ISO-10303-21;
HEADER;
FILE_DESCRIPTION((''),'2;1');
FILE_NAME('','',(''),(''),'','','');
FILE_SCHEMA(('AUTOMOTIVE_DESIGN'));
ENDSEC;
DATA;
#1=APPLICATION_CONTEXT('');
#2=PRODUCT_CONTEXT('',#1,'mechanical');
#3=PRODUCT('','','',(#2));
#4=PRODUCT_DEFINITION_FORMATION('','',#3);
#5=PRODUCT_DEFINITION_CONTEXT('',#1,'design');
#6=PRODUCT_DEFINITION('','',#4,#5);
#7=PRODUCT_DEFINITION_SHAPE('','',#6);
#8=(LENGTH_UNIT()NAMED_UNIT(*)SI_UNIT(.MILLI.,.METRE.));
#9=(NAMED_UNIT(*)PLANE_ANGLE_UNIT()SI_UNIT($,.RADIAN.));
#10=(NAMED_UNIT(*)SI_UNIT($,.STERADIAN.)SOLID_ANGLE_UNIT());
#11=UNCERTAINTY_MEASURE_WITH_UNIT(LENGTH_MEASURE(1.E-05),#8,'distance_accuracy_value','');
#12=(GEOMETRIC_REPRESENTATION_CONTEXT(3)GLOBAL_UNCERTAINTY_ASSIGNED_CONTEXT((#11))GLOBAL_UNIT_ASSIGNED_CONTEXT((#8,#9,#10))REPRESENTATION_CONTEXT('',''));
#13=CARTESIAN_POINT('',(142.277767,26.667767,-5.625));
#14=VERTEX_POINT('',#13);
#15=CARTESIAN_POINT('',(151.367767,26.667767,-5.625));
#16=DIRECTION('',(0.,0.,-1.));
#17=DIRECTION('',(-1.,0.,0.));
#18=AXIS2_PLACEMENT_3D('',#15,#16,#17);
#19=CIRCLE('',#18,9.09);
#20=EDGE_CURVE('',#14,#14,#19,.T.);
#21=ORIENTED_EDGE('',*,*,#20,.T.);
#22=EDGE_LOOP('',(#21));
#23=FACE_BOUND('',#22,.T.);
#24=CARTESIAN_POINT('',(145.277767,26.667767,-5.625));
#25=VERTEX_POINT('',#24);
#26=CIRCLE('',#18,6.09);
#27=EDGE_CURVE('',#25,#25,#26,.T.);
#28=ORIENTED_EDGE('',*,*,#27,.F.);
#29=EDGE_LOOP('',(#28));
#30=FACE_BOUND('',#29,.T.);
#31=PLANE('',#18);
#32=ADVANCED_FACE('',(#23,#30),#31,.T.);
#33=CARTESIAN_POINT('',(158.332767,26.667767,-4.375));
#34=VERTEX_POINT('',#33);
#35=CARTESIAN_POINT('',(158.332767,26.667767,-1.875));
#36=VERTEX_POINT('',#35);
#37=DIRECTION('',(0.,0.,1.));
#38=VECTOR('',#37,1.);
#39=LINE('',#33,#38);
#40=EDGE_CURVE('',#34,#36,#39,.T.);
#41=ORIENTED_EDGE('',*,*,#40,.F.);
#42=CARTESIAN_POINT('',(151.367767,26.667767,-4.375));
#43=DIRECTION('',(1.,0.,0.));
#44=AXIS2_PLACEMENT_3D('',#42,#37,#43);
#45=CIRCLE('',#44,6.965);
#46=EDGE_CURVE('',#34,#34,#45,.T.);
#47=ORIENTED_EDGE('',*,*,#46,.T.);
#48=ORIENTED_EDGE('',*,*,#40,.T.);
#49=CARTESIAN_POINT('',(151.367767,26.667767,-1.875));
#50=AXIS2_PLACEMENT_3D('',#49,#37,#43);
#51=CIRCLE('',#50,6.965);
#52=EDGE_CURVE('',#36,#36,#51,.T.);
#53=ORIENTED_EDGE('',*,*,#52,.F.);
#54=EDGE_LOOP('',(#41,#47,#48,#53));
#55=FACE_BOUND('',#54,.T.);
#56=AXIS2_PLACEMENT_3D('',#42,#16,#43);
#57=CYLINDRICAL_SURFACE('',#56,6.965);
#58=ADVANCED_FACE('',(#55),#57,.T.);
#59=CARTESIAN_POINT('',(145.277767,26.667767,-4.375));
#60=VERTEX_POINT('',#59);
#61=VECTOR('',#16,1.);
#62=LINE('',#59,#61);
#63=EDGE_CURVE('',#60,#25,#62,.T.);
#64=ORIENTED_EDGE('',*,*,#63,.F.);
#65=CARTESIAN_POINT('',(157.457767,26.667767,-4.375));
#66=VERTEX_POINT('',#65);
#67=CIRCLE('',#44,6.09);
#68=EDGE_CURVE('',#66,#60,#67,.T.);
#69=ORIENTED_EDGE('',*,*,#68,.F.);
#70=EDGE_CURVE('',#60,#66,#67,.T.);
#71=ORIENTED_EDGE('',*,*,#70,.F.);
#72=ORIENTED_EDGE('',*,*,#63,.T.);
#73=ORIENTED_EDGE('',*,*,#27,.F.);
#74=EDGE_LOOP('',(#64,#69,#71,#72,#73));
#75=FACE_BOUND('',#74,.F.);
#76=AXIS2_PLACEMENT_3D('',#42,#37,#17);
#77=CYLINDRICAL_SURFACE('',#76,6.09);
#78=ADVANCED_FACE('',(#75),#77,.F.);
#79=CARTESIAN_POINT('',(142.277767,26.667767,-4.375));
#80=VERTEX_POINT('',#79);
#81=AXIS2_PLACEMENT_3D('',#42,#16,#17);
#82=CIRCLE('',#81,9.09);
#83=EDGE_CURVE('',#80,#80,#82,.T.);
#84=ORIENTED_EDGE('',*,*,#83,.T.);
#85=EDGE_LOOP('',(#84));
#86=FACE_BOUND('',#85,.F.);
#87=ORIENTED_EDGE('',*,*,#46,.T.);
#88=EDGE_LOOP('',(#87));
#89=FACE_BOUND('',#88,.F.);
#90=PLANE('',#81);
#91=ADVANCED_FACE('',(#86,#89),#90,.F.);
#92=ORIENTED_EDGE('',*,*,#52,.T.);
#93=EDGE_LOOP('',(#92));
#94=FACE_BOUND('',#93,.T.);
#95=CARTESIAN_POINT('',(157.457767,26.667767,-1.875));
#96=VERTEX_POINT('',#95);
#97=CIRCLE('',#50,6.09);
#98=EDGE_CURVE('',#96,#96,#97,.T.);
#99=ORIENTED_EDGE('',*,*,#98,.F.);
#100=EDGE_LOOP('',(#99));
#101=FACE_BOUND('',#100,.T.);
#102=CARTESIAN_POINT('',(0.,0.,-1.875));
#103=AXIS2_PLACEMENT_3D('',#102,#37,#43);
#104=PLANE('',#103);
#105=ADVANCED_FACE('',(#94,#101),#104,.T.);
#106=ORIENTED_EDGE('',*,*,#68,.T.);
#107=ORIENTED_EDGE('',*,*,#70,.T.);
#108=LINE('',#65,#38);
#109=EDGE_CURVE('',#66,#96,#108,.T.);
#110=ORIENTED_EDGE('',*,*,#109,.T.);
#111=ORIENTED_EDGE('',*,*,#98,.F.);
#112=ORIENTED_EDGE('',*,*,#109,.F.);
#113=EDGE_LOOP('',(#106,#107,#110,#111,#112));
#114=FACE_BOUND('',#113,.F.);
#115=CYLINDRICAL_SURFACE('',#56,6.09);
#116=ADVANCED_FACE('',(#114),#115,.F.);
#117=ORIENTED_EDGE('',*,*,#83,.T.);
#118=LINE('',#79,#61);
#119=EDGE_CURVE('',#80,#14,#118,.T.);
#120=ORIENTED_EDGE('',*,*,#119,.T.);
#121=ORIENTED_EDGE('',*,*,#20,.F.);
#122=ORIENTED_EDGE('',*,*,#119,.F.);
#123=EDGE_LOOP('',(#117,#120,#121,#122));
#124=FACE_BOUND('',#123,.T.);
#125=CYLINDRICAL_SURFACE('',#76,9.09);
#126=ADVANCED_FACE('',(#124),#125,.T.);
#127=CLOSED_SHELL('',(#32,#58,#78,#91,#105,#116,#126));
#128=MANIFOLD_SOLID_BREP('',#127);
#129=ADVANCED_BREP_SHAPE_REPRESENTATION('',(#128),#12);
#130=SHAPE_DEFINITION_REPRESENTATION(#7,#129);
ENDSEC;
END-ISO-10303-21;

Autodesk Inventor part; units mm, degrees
ref_plane "YZ Plane" through (0, 0, 0) normal (1, 0, 0) x (0, 1, 0)
ref_plane "XZ Plane" through (0, 0, 0) normal (0, 1, 0) x (-1, 0, 0)
sketch "Sketch1" plane through (0, 0, 0) normal (0, 0, 1) x (1, 0, 0)
  circle A0 centre (151.367767, 26.667767) radius 7
  circle A1 centre (151.367767, 26.667767) radius 6.965
  circle A2 centre (151.367767, 26.667767) radius 6.09
  point P0 (0, 0)
  dimension "d0" = 0.035
  dimension "d2" = 0.875
ref_plane "Work Plane1" through (-19.467767, 1.0375, -4.375) normal (0, 0, -1) x (0, 1, 0)
sketch "Sketch1 outline for Extrusion1" plane through (0, 0, 0) normal (0, 0, 1) x (1, 0, 0)
  circle A0 centre (151.367767, 26.667767) radius 6.965
  circle A1 centre (151.367767, 26.667767) radius 6.09
extrude "Extrusion1" add sketch "Sketch1 outline for Extrusion1" along normal blind 2.5 from surface at -4.375
sketch "Sketch2" plane through (151.367767, 26.667767, -4.375) normal (0, 0, -1) x (-1, 0, 0)
  circle A0 centre (0, 0) radius 6.965 projected
  circle A1 centre (0, 0) radius 6.09 projected
  circle A2 centre (0, 0) radius 7.09
  circle A3 centre (0, 0) radius 9.09
  point P0 (151.367767, -26.667767)
  dimension "d5" = 0.125
  dimension "d6" = 2
extrude "Extrusion2" add sketch "Sketch2" along normal blind 1.25 contours A0 | A2 | A3
properties part number "Half Inch Lense Holder Cover (V5)"
